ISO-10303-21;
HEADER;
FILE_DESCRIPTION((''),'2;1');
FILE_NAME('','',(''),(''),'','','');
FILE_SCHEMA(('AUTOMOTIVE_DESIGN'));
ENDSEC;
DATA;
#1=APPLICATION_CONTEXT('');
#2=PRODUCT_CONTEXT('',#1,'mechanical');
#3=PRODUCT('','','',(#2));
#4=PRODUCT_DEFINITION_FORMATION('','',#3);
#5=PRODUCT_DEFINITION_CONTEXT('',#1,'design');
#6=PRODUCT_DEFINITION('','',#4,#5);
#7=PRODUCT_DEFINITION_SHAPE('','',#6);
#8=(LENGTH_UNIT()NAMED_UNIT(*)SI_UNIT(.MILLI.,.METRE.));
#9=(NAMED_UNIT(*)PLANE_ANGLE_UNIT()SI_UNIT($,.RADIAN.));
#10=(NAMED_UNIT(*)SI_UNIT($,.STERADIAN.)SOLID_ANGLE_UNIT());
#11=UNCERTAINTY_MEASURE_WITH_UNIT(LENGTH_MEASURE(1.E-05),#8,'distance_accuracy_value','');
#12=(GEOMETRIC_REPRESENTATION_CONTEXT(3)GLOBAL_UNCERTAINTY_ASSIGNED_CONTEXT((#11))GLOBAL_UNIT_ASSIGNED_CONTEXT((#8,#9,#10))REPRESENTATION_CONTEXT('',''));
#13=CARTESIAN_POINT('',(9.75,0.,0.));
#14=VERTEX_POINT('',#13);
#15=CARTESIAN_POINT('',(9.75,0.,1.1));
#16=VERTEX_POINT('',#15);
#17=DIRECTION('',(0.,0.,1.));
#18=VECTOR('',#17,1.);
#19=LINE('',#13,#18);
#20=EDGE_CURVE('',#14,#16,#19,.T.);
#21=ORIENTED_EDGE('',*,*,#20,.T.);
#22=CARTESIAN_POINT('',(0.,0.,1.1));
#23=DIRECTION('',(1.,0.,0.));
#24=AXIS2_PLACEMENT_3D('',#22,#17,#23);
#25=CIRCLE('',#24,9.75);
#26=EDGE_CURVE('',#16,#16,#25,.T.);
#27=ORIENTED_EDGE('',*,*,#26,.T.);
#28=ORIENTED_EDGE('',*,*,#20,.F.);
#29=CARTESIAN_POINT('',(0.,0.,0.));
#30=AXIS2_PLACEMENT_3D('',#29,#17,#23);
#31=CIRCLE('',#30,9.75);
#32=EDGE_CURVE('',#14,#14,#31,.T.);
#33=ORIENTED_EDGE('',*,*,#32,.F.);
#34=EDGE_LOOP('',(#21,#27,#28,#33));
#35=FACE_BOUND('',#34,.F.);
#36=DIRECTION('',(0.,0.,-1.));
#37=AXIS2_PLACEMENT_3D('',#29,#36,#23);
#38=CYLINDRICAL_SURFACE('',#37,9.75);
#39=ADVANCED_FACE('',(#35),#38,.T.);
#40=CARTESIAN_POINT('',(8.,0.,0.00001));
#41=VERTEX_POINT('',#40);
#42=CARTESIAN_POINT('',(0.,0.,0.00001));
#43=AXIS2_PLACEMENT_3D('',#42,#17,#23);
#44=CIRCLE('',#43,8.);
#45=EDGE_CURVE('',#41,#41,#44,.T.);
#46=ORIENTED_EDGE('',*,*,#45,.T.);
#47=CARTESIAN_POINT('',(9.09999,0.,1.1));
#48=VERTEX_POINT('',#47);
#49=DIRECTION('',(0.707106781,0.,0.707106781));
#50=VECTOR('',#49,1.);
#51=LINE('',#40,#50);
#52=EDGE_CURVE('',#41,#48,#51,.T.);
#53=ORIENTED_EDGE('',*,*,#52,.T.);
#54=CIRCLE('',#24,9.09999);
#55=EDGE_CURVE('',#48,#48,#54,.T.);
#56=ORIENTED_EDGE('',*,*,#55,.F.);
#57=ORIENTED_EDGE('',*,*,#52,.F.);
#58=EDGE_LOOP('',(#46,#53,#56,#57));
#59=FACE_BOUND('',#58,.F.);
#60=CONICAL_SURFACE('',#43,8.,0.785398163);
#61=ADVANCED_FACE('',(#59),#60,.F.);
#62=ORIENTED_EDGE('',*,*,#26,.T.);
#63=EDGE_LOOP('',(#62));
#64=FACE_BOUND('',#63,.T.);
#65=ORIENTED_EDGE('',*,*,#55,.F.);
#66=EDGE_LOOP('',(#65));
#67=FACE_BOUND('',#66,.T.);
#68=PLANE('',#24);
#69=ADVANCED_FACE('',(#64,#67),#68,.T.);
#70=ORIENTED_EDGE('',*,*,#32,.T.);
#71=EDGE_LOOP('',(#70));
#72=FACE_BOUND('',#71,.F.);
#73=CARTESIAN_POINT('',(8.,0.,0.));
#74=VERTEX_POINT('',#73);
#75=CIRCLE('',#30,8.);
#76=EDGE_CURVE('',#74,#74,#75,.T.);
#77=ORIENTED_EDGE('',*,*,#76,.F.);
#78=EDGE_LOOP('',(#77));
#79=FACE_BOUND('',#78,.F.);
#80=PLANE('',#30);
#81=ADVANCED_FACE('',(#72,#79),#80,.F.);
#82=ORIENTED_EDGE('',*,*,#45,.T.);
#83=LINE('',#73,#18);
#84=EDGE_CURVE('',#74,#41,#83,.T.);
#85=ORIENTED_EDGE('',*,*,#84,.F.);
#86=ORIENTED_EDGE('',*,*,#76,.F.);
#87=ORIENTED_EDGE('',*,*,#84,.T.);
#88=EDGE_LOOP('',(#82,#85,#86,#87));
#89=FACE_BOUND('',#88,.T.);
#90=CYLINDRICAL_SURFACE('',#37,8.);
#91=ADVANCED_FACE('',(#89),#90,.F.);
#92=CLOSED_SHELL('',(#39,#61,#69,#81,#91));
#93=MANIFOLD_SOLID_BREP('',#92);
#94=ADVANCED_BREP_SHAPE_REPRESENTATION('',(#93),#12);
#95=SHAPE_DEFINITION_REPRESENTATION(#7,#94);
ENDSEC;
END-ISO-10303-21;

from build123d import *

# Parameters (mm, degrees)
F0_R     = 9.75
F0_R_2   = 8
F1_DEPTH = 1.1
F2_SIZE  = 1.09999


# Not quite as in the source:
# - a fillet or chamfer is up to 0.001 mm smaller than in the source, because OpenCascade refuses the exact size


with BuildPart() as f1:
    # F0 (on Top) → F1 (new body)
    with BuildSketch(Plane.XY):
        Circle(F0_R)
        Circle(F0_R_2, mode=Mode.SUBTRACT)
    extrude(amount=F1_DEPTH)

    # F2 (size 1.1 in the source; OpenCascade refuses exactly that, so slightly less here)
    f2_edges = [f1.edges().sort_by_distance(p)[0] for p in [
        (-8, 0, 1.1),
    ]]
    chamfer(f2_edges, length=F2_SIZE)


solid = f1.part
